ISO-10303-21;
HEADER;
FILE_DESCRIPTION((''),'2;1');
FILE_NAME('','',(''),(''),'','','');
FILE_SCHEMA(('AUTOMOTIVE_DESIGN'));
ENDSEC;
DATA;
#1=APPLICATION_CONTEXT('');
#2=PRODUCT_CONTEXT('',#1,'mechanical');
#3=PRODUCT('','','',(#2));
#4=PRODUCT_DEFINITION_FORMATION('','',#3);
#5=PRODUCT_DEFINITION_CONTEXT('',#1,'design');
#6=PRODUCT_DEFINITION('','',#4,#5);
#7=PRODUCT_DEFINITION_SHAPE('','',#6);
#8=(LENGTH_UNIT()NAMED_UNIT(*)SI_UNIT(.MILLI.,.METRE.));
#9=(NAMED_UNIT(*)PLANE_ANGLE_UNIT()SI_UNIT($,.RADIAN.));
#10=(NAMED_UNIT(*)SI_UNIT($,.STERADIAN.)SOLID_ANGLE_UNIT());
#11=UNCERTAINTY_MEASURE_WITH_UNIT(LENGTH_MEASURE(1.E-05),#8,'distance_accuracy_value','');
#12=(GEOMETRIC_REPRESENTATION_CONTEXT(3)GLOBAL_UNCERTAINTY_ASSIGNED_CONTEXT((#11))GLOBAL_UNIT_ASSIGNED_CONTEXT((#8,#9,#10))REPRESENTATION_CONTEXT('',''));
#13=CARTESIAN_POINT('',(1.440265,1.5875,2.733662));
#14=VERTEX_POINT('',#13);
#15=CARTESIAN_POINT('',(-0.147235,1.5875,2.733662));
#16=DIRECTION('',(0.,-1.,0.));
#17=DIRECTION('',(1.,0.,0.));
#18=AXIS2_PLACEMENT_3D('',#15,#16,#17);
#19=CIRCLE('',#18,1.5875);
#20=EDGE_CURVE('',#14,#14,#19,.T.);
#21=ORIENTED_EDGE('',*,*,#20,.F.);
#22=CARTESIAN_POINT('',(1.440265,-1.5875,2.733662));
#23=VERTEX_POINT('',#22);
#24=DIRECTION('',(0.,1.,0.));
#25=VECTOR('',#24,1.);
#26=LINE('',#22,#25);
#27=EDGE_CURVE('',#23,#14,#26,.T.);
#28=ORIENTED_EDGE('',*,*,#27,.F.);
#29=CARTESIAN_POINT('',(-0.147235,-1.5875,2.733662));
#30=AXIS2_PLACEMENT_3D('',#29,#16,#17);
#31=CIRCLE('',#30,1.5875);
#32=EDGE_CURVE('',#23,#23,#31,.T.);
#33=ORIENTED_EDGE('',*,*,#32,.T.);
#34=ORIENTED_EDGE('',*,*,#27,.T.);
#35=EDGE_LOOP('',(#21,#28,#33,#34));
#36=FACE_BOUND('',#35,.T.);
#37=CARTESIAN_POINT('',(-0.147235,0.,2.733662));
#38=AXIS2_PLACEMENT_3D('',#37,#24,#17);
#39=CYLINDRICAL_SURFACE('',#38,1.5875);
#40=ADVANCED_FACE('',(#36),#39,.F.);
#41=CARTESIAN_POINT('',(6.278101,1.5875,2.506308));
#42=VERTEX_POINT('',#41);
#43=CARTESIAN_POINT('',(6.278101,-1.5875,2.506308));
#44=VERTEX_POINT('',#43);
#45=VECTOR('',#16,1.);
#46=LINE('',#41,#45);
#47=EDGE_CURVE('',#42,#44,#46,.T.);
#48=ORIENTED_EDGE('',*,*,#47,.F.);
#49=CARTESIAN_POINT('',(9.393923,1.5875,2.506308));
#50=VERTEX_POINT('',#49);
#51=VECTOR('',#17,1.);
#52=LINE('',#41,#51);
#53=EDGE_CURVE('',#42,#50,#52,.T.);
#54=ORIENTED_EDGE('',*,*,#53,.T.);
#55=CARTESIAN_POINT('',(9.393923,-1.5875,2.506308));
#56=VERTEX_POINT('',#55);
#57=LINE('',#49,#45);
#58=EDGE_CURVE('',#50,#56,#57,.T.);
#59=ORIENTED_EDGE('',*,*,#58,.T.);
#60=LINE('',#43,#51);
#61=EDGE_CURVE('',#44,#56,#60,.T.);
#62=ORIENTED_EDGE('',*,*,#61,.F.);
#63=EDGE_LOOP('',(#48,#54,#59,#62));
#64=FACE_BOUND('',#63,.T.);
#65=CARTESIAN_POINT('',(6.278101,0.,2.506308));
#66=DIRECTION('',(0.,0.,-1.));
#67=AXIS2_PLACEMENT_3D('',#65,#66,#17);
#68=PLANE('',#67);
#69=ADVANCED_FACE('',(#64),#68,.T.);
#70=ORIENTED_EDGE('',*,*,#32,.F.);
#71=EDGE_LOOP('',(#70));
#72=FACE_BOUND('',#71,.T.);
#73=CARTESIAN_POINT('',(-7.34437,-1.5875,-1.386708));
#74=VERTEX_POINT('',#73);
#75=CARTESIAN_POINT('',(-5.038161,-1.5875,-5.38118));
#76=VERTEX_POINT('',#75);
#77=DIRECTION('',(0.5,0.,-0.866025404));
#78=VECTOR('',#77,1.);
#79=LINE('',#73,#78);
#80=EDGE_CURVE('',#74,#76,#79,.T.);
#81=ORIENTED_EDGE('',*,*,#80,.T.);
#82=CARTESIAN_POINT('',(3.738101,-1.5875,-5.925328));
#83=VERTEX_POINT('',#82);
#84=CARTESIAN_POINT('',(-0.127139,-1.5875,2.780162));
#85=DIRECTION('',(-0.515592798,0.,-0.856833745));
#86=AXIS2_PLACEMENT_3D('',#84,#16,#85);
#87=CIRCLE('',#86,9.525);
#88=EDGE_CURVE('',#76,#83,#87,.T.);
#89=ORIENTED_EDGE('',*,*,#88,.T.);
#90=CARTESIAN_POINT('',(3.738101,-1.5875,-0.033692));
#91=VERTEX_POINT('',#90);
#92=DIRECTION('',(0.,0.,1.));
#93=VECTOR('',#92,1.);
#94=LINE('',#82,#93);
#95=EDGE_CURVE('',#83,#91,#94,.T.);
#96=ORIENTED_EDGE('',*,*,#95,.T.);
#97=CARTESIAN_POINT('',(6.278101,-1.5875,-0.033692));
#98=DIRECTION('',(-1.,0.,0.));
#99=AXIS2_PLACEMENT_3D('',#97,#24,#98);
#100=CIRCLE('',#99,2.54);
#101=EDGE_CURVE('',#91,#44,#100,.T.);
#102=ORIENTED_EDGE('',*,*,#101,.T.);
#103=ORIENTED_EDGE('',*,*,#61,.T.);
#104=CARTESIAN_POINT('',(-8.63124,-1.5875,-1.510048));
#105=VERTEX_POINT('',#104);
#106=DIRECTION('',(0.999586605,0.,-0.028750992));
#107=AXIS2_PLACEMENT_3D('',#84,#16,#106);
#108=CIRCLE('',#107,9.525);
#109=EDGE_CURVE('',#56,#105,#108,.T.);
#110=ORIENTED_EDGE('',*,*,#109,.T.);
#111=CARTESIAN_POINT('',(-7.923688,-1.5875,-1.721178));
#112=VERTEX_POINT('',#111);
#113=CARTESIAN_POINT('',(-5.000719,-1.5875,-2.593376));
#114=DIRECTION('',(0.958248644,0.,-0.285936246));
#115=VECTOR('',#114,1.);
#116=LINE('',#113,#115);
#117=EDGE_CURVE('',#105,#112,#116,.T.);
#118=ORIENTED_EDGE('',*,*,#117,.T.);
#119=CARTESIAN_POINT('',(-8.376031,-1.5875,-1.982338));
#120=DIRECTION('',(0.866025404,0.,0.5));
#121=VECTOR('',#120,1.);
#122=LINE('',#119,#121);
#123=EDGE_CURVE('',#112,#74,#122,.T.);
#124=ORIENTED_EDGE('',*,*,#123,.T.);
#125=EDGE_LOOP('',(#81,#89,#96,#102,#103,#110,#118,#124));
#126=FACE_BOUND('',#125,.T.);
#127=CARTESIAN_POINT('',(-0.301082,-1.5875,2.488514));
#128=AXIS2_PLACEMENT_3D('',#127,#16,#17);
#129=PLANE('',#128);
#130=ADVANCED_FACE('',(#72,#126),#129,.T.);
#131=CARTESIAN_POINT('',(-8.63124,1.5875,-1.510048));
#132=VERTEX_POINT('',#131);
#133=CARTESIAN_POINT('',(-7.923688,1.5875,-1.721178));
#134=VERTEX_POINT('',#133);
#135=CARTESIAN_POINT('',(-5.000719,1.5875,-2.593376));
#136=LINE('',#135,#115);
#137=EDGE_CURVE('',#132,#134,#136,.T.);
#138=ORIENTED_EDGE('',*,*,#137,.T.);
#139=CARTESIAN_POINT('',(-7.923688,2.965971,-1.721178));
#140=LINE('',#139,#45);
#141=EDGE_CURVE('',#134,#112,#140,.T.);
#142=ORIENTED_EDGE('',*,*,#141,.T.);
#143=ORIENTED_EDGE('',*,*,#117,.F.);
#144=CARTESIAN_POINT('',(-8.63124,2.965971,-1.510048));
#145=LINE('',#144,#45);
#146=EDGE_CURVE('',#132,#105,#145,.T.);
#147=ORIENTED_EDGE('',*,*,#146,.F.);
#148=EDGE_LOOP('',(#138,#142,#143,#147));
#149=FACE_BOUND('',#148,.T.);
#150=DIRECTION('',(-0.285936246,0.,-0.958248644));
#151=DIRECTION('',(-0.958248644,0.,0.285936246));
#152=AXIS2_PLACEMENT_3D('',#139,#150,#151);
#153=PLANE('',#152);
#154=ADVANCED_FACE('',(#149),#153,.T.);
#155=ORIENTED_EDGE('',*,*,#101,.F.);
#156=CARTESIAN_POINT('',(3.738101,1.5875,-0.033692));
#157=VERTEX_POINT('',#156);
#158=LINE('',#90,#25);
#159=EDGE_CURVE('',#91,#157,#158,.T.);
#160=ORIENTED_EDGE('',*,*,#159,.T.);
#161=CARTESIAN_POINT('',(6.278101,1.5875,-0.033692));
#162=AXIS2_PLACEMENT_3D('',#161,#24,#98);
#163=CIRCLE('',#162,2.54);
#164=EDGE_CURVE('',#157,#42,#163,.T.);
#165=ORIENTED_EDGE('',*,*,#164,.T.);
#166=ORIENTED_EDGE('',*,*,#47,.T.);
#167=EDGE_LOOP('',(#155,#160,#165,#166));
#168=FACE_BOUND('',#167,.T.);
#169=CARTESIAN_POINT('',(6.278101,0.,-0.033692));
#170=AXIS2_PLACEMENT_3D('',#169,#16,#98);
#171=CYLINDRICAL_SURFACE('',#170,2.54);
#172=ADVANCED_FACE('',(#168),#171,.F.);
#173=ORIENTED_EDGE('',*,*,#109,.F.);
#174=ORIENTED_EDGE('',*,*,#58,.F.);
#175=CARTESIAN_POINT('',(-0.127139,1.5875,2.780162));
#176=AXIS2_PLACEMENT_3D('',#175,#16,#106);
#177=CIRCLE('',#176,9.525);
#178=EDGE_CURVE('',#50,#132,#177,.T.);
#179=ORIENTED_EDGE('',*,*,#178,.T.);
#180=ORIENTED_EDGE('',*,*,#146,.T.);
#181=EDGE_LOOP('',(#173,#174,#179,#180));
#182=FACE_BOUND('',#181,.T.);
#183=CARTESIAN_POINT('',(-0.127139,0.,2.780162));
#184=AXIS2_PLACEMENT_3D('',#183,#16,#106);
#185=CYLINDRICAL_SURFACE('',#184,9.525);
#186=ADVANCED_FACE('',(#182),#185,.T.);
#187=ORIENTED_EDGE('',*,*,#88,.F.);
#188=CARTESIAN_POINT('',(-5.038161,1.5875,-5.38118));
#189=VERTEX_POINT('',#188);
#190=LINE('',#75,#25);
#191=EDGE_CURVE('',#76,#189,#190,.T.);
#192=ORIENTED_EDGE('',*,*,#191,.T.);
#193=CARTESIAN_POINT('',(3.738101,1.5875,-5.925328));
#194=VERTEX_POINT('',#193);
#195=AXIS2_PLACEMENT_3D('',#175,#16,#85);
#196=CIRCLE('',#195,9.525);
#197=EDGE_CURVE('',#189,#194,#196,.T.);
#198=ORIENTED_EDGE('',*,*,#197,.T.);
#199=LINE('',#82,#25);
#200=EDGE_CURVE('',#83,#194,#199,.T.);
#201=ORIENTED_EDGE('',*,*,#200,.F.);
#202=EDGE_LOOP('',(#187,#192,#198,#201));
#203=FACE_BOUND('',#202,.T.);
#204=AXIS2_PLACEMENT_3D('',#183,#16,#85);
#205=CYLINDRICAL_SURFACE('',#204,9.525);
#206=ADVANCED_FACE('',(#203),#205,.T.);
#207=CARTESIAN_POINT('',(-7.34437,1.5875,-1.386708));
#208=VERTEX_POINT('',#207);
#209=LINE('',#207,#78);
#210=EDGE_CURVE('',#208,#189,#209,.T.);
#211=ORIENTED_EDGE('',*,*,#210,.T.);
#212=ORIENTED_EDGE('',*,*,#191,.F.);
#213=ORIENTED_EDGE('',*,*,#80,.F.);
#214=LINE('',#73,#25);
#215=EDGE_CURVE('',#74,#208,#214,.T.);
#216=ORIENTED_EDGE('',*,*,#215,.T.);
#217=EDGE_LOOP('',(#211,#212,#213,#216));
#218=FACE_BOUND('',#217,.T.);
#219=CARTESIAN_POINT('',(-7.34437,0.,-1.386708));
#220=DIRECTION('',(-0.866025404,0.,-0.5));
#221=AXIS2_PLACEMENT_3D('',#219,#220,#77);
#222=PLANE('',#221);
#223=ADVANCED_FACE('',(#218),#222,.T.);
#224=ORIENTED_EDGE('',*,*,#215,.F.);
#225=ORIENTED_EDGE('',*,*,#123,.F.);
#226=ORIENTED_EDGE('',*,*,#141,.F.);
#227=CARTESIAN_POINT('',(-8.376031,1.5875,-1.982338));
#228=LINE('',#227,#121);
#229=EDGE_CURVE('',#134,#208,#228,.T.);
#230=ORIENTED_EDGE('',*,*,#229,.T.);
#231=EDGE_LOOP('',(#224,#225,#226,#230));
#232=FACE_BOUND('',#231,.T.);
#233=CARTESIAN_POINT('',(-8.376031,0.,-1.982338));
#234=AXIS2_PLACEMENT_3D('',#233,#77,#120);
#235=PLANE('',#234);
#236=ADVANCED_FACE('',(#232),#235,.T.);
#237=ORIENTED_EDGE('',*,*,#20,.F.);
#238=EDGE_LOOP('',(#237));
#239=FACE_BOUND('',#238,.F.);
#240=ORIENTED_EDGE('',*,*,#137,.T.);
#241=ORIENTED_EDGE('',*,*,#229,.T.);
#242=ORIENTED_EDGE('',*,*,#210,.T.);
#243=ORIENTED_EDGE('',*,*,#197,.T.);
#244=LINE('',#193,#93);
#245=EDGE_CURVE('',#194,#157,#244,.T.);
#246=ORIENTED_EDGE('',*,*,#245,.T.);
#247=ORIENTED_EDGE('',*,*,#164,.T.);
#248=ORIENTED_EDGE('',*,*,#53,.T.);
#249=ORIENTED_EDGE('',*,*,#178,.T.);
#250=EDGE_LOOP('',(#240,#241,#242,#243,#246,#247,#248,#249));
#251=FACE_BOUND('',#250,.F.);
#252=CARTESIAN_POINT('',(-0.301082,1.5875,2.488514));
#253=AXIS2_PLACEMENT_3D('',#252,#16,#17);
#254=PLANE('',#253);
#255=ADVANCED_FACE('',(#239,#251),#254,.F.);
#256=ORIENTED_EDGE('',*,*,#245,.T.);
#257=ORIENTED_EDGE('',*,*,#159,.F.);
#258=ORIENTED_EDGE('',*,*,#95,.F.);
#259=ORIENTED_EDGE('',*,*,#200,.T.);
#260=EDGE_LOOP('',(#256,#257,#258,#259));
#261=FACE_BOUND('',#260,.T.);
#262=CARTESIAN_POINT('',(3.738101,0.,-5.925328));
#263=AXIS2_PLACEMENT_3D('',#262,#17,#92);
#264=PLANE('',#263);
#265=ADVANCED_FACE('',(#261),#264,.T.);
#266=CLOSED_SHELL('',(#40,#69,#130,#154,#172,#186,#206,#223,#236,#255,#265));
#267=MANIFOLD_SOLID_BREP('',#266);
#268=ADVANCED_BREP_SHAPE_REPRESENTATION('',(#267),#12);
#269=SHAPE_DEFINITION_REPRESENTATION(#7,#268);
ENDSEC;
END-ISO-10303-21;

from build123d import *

# Parameters (mm, degrees)
F0_R        = 1.5875
F1_DEPTH    = 1.5875
F2_T1_DEPTH = 5.9319428422


# Not quite as in the source:
# - a fillet or chamfer that OpenCascade refuses, or shapes differently, is made with other operations: its cross-section is extruded or revolved along the edge and cut away or added


with BuildPart() as f1:
    # F0 (on Front) → F1 (new body, symmetric)
    with BuildSketch(Plane.XZ):
        with BuildLine():
            ThreePointArc((3.7381009291, -0.0336915449), (4.4820497049, 1.7623596793), (6.2781009291, 2.5063084551))
            Line((6.2781009291, 2.5063084551), (9.3939231872, 2.5063084551))
            ThreePointArc((9.3939231872, 2.5063084551), (-2.459861222, 12.0150971251), (-8.3760311943, -1.9823383417))
            Line((-8.3760311943, -1.9823383417), (-7.3443697718, -1.3867083417))
            Line((-7.3443697718, -1.3867083417), (-5.0381606197, -5.381179766))
            ThreePointArc((-5.0381606197, -5.381179766), (-0.7165786385, -6.7265825886), (3.7381009291, -5.9253276194))
            Line((3.7381009291, -5.9253276194), (3.7381009291, -0.0336915449))
        make_face()
        with Locations((-0.1472348195, 2.7336615811)):
            Circle(F0_R, mode=Mode.SUBTRACT)
    extrude(amount=F1_DEPTH, both=True)

    # F2: chamfer of 0.508 on 1 edges, made by hand

    # F2_s2 → F2_t1 (cut)
    with BuildSketch(Plane.XZ.offset(-2.9659714211)):
        with BuildLine():
            Line((-7.9236877385, -1.7211777257), (-8.6312397675, -1.5100480025))
            ThreePointArc((-8.6312397675, -1.5100480025), (-8.5103751964, -1.7416719985), (-8.3760311943, -1.9823383417))
            Line((-8.3760311943, -1.9823383417), (-7.9236877385, -1.7211777257))
        make_face()
    extrude(amount=F2_T1_DEPTH, mode=Mode.SUBTRACT)


solid = f1.part
